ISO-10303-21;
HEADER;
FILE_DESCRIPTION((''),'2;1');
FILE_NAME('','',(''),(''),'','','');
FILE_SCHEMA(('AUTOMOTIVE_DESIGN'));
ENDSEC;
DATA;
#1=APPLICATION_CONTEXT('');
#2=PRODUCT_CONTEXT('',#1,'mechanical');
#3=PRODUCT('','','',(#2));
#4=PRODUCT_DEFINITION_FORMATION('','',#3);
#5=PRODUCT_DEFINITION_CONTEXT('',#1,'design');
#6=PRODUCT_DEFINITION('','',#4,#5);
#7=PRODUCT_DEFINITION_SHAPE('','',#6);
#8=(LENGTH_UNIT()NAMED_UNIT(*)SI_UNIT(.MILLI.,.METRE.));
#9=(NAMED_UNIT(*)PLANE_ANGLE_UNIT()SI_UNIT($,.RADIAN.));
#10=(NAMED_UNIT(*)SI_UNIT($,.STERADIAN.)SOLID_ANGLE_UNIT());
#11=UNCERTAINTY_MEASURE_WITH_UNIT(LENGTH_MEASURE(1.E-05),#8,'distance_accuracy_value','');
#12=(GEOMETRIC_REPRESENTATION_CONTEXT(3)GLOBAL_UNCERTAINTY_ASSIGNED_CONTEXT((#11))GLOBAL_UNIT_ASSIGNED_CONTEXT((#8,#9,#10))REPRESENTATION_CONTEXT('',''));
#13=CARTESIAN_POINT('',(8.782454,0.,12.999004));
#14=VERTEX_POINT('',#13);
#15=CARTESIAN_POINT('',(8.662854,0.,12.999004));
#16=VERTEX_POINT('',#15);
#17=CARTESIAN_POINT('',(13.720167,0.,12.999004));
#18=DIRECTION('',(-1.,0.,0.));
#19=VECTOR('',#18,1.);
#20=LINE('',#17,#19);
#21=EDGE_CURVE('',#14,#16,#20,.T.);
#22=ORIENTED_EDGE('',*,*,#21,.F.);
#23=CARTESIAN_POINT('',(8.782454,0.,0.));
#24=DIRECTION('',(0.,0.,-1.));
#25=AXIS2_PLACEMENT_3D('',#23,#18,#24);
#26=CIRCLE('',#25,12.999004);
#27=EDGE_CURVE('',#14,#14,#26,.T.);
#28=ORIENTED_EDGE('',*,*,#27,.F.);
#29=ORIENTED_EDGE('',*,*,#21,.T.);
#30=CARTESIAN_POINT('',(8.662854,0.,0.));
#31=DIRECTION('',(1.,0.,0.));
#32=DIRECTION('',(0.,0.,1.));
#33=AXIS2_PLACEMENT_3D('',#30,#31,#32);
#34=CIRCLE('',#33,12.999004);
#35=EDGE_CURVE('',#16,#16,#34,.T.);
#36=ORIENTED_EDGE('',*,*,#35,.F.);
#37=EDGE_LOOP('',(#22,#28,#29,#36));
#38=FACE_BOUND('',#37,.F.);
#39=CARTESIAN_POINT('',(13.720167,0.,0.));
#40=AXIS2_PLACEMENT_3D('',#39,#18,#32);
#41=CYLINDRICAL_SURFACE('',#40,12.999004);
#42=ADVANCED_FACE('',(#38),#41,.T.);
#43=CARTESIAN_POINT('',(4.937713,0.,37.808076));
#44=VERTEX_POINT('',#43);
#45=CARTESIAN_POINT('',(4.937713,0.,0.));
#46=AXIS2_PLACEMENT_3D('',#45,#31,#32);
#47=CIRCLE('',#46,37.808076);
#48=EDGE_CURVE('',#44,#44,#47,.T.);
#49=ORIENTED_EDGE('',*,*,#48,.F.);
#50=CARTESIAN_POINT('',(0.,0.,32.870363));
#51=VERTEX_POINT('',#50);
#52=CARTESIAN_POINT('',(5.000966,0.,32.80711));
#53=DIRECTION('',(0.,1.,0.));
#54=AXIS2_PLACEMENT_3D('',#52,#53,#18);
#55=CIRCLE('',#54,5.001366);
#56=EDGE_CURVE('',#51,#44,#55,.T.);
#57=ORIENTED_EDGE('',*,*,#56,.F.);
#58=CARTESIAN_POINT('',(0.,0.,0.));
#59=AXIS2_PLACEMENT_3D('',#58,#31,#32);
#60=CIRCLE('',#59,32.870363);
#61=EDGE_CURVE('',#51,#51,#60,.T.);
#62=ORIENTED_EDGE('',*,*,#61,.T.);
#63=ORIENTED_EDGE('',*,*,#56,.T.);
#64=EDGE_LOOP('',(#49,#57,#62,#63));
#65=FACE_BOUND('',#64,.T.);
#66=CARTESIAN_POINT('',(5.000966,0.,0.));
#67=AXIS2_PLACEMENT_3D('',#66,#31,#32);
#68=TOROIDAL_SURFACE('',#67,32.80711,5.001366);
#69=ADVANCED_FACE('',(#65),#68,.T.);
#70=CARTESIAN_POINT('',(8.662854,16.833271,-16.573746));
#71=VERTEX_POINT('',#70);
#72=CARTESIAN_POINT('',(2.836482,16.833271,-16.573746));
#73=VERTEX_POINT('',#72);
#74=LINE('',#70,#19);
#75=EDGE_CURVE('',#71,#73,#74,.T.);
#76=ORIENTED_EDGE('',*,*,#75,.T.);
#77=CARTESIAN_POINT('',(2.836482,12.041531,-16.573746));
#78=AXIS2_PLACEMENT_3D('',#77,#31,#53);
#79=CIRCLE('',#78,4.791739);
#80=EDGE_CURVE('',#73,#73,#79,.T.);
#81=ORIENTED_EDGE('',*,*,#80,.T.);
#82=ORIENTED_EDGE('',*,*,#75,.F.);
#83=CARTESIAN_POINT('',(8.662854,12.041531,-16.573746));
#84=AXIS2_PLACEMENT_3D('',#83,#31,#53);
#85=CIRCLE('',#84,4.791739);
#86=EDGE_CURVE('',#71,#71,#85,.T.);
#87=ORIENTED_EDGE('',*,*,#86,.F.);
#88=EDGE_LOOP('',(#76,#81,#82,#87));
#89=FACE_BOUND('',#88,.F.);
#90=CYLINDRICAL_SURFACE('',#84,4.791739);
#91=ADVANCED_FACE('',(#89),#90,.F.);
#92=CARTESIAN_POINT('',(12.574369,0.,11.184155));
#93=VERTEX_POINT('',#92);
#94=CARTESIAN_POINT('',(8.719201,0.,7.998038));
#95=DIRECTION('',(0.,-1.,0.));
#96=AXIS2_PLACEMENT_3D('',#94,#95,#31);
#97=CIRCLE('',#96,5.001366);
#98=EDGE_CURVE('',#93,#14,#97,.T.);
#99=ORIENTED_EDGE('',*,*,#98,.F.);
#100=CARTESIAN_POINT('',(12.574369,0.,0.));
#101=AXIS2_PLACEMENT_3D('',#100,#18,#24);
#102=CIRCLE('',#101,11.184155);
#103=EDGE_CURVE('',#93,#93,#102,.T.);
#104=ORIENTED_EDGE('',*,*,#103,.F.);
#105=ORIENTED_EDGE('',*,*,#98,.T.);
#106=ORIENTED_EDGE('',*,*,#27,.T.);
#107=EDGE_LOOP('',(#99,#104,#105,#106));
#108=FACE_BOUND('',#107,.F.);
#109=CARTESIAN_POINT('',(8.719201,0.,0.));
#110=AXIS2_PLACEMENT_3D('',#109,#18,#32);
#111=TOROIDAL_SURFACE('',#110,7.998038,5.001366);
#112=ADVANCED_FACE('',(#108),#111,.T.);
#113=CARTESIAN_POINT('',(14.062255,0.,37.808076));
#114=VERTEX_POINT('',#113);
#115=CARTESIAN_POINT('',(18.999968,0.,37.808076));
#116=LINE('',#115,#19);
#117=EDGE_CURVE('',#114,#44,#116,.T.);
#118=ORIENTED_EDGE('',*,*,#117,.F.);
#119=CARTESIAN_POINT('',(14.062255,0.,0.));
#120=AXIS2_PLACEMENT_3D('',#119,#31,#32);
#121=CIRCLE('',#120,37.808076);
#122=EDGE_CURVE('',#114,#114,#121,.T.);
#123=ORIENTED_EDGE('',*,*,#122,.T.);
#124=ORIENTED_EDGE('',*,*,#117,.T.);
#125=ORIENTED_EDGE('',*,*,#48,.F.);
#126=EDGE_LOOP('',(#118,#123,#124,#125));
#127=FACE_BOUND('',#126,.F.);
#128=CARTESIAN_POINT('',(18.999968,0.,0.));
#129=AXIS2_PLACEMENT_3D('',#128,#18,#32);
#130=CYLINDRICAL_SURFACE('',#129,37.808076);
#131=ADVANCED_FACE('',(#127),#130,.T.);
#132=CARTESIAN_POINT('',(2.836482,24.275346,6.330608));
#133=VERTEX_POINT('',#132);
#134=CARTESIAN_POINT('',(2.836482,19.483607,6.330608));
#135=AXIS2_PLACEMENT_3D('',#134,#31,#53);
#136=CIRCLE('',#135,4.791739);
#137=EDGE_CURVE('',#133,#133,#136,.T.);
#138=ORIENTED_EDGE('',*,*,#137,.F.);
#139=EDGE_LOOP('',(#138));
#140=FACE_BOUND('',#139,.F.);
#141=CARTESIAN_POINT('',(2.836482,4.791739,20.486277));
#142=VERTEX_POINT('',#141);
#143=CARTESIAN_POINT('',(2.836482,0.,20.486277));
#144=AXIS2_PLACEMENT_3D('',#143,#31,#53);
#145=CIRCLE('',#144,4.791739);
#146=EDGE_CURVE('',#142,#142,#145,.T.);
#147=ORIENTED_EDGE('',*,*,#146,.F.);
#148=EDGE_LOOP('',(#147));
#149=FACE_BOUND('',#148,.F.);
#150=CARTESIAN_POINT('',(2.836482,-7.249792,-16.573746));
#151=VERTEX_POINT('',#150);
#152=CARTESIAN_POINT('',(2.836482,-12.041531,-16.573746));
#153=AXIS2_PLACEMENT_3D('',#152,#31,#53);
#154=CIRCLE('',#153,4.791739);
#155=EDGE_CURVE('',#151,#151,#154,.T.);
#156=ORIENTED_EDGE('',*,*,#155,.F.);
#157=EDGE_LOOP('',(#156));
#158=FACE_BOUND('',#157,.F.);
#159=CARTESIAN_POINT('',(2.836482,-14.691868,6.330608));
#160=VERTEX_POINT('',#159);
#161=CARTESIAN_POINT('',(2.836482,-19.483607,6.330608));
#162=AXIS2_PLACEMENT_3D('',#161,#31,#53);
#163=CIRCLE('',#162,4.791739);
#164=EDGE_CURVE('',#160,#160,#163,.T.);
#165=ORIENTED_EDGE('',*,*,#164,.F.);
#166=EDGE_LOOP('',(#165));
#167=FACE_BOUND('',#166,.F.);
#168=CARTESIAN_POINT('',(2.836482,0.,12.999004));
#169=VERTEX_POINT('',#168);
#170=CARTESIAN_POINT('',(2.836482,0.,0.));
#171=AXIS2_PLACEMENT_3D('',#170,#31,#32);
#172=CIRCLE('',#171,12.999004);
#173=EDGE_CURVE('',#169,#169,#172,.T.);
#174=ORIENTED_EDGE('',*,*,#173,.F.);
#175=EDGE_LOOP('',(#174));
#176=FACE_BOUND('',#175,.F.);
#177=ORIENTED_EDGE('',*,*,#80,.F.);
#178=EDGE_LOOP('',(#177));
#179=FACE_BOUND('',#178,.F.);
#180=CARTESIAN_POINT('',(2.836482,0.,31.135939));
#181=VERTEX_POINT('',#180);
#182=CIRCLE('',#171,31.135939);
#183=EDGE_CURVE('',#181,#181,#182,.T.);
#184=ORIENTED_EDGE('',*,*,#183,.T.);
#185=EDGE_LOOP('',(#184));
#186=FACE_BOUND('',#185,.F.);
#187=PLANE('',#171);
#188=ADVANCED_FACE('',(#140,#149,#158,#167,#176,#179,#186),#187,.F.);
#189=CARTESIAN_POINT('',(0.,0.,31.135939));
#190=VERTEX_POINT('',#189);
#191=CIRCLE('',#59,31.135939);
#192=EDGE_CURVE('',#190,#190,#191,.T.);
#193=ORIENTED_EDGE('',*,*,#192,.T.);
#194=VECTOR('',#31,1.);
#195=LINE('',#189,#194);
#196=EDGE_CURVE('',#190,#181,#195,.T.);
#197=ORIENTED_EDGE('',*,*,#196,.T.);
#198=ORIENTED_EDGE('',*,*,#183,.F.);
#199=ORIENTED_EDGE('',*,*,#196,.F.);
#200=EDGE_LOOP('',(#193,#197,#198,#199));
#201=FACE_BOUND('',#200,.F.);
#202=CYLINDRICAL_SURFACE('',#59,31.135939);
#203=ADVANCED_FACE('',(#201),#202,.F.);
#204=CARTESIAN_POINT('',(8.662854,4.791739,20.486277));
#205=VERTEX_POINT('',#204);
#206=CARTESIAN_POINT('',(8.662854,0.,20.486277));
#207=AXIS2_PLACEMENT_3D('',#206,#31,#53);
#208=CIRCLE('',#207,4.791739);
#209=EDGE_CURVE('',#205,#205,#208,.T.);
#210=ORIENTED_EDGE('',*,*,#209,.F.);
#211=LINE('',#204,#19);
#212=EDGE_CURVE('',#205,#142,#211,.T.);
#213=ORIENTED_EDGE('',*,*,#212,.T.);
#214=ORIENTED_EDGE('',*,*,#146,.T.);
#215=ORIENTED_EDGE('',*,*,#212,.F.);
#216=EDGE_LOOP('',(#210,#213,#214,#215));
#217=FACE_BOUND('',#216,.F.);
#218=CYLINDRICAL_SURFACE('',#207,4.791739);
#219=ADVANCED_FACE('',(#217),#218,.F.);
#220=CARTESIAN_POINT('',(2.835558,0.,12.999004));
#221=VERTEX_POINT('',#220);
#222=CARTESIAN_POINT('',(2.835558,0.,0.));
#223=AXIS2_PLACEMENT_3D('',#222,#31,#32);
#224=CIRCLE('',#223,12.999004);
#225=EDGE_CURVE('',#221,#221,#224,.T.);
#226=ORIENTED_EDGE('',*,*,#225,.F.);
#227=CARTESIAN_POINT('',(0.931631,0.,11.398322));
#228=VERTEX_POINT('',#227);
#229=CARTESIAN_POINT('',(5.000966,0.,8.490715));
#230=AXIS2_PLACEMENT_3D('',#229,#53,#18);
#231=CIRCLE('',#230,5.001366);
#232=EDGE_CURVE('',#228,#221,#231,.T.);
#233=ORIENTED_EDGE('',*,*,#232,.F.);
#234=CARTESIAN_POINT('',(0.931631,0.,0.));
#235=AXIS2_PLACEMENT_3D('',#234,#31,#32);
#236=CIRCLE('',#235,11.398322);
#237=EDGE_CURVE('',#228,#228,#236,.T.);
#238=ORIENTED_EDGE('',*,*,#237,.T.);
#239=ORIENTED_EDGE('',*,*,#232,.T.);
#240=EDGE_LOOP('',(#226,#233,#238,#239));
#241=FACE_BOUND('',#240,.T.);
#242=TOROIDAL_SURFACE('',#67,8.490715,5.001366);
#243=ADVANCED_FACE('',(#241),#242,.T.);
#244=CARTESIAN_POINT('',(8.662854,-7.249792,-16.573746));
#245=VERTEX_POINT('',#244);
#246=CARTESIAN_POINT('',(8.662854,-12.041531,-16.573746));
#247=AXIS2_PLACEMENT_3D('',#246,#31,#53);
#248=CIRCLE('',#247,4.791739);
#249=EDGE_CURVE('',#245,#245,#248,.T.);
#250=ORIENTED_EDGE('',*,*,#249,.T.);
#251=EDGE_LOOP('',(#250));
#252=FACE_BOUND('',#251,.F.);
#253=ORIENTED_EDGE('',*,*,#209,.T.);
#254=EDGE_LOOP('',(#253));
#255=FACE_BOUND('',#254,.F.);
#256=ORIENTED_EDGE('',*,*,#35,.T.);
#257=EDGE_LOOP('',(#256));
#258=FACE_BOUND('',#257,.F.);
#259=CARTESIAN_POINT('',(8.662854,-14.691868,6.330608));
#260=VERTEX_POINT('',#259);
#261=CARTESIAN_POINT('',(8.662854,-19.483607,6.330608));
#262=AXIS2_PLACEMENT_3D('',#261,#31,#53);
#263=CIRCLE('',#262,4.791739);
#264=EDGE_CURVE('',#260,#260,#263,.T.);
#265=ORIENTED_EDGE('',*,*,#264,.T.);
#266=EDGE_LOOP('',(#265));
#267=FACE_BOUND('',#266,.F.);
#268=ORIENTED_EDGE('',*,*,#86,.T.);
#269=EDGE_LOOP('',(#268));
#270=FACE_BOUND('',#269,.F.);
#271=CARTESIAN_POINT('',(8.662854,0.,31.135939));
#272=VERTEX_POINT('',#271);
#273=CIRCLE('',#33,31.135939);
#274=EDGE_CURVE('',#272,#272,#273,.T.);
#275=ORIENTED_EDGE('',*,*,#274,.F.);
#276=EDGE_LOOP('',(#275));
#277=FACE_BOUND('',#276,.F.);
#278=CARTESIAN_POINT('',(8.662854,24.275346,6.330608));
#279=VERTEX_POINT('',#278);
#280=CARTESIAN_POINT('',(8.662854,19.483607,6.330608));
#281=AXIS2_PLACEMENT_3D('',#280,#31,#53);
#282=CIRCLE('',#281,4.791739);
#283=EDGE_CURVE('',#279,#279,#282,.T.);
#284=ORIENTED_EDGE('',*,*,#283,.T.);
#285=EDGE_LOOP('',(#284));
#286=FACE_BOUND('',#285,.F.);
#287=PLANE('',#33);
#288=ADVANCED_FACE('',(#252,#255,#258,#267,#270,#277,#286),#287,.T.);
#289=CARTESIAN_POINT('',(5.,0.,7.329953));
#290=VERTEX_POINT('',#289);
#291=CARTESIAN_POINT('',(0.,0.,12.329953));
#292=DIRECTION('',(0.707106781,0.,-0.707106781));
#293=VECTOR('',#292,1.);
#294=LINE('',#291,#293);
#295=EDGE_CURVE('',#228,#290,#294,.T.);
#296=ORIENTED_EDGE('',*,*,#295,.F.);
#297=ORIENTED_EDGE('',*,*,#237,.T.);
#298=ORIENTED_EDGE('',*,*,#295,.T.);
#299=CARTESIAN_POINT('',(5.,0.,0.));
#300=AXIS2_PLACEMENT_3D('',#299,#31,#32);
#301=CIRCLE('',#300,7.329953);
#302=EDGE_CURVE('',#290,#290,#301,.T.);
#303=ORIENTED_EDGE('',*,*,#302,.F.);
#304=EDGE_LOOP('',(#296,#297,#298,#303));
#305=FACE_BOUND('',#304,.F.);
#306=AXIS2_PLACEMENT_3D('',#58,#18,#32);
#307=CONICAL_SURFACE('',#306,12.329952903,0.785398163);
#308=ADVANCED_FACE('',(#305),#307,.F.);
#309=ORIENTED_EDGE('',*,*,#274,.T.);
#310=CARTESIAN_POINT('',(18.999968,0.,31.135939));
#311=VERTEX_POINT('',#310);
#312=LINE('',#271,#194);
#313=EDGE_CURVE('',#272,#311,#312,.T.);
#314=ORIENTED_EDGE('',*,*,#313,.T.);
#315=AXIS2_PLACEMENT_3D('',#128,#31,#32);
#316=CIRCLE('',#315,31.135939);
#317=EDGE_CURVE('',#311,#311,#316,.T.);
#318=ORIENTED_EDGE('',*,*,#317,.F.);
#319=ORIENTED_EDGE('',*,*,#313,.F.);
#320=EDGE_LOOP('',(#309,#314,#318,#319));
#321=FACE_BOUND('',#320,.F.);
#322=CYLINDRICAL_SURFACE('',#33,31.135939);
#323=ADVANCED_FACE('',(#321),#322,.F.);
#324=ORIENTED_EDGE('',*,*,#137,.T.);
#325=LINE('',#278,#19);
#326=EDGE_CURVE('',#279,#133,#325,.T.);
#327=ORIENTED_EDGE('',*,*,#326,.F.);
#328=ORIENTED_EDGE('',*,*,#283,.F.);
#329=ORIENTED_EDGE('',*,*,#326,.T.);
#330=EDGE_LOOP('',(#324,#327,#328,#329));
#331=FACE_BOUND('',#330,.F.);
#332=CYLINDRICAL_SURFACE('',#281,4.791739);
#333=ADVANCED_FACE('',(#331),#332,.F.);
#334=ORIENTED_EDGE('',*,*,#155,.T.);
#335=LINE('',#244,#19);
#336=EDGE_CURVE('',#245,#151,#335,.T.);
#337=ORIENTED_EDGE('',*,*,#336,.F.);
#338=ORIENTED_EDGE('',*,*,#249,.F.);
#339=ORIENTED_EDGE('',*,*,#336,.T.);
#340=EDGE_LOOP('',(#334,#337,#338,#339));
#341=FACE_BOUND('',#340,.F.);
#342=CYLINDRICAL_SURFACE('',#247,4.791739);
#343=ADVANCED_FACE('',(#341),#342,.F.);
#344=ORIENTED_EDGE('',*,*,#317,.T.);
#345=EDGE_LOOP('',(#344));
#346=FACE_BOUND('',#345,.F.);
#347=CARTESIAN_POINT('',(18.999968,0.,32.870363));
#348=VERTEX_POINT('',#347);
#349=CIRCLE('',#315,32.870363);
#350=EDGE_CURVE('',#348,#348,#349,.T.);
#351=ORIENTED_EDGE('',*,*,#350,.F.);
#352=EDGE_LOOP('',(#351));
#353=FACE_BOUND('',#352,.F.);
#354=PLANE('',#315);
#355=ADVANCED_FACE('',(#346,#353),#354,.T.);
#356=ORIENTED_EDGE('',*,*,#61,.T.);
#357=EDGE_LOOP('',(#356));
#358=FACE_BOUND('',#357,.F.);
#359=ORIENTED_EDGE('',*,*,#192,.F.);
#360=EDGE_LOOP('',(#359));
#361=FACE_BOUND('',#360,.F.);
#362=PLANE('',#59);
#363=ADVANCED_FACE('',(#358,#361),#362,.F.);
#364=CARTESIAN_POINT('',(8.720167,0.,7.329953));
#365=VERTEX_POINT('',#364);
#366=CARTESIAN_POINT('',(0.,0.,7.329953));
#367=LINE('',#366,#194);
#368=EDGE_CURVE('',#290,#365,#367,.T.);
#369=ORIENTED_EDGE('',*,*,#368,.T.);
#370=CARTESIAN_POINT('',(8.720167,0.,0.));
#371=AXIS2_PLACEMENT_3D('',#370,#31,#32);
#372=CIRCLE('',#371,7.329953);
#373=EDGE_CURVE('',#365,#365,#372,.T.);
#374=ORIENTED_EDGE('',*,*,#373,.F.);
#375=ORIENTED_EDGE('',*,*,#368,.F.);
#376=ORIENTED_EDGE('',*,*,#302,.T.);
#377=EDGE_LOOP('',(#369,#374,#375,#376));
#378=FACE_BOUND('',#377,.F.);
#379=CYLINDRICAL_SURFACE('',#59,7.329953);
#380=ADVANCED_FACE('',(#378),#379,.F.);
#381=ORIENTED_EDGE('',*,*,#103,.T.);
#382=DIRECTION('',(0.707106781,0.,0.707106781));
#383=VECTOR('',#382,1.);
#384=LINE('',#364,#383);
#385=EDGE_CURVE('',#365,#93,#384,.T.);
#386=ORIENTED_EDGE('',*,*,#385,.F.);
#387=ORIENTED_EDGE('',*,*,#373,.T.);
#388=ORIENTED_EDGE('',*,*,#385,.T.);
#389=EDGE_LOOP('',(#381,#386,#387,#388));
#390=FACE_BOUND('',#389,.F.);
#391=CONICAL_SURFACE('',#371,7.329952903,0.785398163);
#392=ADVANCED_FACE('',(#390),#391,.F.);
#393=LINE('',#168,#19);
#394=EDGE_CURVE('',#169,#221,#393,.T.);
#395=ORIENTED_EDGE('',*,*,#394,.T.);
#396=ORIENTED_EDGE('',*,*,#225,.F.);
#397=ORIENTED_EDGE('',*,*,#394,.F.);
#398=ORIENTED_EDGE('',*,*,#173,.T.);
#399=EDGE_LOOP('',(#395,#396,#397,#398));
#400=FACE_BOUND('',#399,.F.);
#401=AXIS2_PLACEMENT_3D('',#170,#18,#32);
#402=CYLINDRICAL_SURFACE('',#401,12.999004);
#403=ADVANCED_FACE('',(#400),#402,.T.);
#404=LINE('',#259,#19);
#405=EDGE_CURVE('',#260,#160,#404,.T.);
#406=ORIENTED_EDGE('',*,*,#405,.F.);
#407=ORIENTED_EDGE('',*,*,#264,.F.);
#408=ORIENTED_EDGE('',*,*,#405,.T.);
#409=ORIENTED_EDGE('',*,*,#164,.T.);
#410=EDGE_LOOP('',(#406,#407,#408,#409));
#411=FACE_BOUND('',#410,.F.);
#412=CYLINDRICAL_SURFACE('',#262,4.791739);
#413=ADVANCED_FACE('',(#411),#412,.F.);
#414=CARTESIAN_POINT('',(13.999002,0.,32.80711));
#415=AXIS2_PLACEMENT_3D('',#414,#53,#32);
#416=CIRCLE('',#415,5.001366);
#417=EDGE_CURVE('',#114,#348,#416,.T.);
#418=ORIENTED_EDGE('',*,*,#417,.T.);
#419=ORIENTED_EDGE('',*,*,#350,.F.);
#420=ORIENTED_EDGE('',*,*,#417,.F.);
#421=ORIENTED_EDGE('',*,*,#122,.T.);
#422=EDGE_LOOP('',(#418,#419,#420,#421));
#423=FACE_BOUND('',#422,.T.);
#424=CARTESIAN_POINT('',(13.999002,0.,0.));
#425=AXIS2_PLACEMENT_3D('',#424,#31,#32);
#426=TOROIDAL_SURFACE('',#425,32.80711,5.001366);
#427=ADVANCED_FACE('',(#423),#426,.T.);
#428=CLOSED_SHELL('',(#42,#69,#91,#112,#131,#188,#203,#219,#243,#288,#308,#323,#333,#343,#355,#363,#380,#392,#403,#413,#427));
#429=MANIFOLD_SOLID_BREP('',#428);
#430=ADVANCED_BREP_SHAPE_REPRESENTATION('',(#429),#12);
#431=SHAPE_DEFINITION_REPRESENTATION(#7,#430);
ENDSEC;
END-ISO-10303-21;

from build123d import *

# Parameters (mm, degrees)
F2_R     = 4.7917393222
F3_DEPTH = 25


# Not quite as in the source:
# - a fillet or chamfer that OpenCascade refuses, or shapes differently, is made with other operations: its cross-section is extruded or revolved along the edge and cut away or added


with BuildPart() as f1:
    # F0 (on Front) → F1 (revolve)
    with BuildSketch(Plane.XZ):
        Polygon((0, 12.9990037531), (0, 7.3299529031), (13.7201668695, 7.3299529031), (13.7201668695, 12.9990037531), (8.6628543213, 12.9990037531), (8.6628543213, 31.1359390616), (18.9999677241, 31.1359390616), (18.9999677241, 37.8080755472), (0, 37.8080755472), (0, 31.1359390616), (2.8364819009, 31.1359390616), (2.8364819009, 12.9990037531), align=None)
    revolve(axis=Axis((6.8600834347, 0, 0), (1, 0, 0)))

    # F2 (on face) → F3 (cut)
    with BuildSketch(Plane.YZ.offset(8.6628543213)):
        with Locations((-19.483606852, 6.3306076199)):
            Circle(F2_R)
        with Locations((0, 20.4862765968)):
            Circle(F2_R)
        with Locations((19.483606852, 6.3306076199)):
            Circle(F2_R)
        with Locations((12.041531258, -16.5737459183)):
            Circle(F2_R)
        with Locations((-12.041531258, -16.5737459183)):
            Circle(F2_R)
    extrude(amount=-F3_DEPTH, mode=Mode.SUBTRACT)

    # F4: fillet of radius 5 on 4 edges, made by hand

    # F4_s1 → F4_t2 (revolve, cut)
    with BuildSketch(Plane.XZ):
        with BuildLine():
            ThreePointArc((-0.0004, 32.8071098618), (1.4644660941, 36.3436094532), (5.0009656854, 37.8084755472))
            Line((5.0009656854, 37.8084755472), (5.0009656854, 38.3086121158))
            ThreePointArc((5.0009656854, 38.3086121158), (2.5004828427, 38.3082121158), (0, 38.3082121158))
            Line((0, 38.3082121158), (-0.5001365685, 37.8080755472))
            ThreePointArc((-0.5001365685, 37.8080755472), (-0.5001365685, 35.3075927045), (-0.5005365685, 32.8071098618))
            Line((-0.5005365685, 32.8071098618), (-0.0004, 32.8071098618))
        make_face()
    revolve(axis=Axis((0, 0, 0), (1, 0, 0)), mode=Mode.SUBTRACT)

    # F4_s3 → F4_t4 (revolve, cut)
    with BuildSketch(Plane.XZ):
        with BuildLine():
            ThreePointArc((13.9990020387, 37.8084755472), (17.53550163, 36.3436094532), (19.0003677241, 32.8071098618))
            Line((19.0003677241, 32.8071098618), (19.5005042926, 32.8071098618))
            ThreePointArc((19.5005042926, 32.8071098618), (19.5001042926, 35.3075927045), (19.5001042926, 37.8080755472))
            Line((19.5001042926, 37.8080755472), (18.9999677241, 38.3082121158))
            ThreePointArc((18.9999677241, 38.3082121158), (16.4994848814, 38.3082121158), (13.9990020387, 38.3086121158))
            Line((13.9990020387, 38.3086121158), (13.9990020387, 37.8084755472))
        make_face()
    revolve(axis=Axis((18.9999677241, 0, 0), (1, 0, 0)), mode=Mode.SUBTRACT)

    # F4_s5 → F4_t6 (revolve, cut)
    with BuildSketch(Plane.XZ):
        with BuildLine():
            ThreePointArc((-0.0004, 8.490714972), (0.7677695224, 11.1541167376), (2.8363087756, 12.9993643465))
            Line((2.8363087756, 12.9993643465), (2.6198430846, 13.450229284))
            ThreePointArc((2.6198430846, 13.450229284), (1.4181543878, 13.4991403216), (0, 13.4991403216))
            Line((0, 13.4991403216), (-0.5001365685, 12.9990037531))
            ThreePointArc((-0.5001365685, 12.9990037531), (-0.5001365685, 10.7448593625), (-0.5005365685, 8.490714972))
            Line((-0.5005365685, 8.490714972), (-0.0004, 8.490714972))
        make_face()
    revolve(axis=Axis((0, 0, 0), (1, 0, 0)), mode=Mode.SUBTRACT)

    # F4_s7 → F4_t8 (revolve, cut)
    with BuildSketch(Plane.XZ):
        with BuildLine():
            ThreePointArc((13.7205668695, 7.9980380676), (12.2557007754, 11.534537659), (8.719201184, 12.9994037531))
            Line((8.719201184, 12.9994037531), (8.719201184, 13.4995403216))
            ThreePointArc((8.719201184, 13.4995403216), (11.2196840267, 13.4991403216), (13.7201668695, 13.4991403216))
            Line((13.7201668695, 13.4991403216), (14.220303438, 12.9990037531))
            ThreePointArc((14.220303438, 12.9990037531), (14.220303438, 10.4985209104), (14.220703438, 7.9980380676))
            Line((14.220703438, 7.9980380676), (13.7205668695, 7.9980380676))
        make_face()
    revolve(axis=Axis((13.7201668695, 0, 0), (1, 0, 0)), mode=Mode.SUBTRACT)

    # F5: chamfer of 5 on 3 edges, made by hand

    # F5_s1 → F5_t2 (revolve, cut)
    with BuildSketch(Plane.XZ):
        Polygon((0, 12.3299529031), (5, 7.3299529031), (0, 7.3299529031), align=None)
    revolve(axis=Axis((0, 0, 0), (1, 0, 0)), mode=Mode.SUBTRACT)

    # F5_s3 → F5_t4 (revolve, cut)
    with BuildSketch(Plane.XZ):
        Polygon((8.7201668695, 7.3299529031), (13.7201668695, 12.3299529031), (13.7201668695, 7.3299529031), align=None)
    revolve(axis=Axis((13.7201668695, 0, 0), (1, 0, 0)), mode=Mode.SUBTRACT)


solid = f1.part
